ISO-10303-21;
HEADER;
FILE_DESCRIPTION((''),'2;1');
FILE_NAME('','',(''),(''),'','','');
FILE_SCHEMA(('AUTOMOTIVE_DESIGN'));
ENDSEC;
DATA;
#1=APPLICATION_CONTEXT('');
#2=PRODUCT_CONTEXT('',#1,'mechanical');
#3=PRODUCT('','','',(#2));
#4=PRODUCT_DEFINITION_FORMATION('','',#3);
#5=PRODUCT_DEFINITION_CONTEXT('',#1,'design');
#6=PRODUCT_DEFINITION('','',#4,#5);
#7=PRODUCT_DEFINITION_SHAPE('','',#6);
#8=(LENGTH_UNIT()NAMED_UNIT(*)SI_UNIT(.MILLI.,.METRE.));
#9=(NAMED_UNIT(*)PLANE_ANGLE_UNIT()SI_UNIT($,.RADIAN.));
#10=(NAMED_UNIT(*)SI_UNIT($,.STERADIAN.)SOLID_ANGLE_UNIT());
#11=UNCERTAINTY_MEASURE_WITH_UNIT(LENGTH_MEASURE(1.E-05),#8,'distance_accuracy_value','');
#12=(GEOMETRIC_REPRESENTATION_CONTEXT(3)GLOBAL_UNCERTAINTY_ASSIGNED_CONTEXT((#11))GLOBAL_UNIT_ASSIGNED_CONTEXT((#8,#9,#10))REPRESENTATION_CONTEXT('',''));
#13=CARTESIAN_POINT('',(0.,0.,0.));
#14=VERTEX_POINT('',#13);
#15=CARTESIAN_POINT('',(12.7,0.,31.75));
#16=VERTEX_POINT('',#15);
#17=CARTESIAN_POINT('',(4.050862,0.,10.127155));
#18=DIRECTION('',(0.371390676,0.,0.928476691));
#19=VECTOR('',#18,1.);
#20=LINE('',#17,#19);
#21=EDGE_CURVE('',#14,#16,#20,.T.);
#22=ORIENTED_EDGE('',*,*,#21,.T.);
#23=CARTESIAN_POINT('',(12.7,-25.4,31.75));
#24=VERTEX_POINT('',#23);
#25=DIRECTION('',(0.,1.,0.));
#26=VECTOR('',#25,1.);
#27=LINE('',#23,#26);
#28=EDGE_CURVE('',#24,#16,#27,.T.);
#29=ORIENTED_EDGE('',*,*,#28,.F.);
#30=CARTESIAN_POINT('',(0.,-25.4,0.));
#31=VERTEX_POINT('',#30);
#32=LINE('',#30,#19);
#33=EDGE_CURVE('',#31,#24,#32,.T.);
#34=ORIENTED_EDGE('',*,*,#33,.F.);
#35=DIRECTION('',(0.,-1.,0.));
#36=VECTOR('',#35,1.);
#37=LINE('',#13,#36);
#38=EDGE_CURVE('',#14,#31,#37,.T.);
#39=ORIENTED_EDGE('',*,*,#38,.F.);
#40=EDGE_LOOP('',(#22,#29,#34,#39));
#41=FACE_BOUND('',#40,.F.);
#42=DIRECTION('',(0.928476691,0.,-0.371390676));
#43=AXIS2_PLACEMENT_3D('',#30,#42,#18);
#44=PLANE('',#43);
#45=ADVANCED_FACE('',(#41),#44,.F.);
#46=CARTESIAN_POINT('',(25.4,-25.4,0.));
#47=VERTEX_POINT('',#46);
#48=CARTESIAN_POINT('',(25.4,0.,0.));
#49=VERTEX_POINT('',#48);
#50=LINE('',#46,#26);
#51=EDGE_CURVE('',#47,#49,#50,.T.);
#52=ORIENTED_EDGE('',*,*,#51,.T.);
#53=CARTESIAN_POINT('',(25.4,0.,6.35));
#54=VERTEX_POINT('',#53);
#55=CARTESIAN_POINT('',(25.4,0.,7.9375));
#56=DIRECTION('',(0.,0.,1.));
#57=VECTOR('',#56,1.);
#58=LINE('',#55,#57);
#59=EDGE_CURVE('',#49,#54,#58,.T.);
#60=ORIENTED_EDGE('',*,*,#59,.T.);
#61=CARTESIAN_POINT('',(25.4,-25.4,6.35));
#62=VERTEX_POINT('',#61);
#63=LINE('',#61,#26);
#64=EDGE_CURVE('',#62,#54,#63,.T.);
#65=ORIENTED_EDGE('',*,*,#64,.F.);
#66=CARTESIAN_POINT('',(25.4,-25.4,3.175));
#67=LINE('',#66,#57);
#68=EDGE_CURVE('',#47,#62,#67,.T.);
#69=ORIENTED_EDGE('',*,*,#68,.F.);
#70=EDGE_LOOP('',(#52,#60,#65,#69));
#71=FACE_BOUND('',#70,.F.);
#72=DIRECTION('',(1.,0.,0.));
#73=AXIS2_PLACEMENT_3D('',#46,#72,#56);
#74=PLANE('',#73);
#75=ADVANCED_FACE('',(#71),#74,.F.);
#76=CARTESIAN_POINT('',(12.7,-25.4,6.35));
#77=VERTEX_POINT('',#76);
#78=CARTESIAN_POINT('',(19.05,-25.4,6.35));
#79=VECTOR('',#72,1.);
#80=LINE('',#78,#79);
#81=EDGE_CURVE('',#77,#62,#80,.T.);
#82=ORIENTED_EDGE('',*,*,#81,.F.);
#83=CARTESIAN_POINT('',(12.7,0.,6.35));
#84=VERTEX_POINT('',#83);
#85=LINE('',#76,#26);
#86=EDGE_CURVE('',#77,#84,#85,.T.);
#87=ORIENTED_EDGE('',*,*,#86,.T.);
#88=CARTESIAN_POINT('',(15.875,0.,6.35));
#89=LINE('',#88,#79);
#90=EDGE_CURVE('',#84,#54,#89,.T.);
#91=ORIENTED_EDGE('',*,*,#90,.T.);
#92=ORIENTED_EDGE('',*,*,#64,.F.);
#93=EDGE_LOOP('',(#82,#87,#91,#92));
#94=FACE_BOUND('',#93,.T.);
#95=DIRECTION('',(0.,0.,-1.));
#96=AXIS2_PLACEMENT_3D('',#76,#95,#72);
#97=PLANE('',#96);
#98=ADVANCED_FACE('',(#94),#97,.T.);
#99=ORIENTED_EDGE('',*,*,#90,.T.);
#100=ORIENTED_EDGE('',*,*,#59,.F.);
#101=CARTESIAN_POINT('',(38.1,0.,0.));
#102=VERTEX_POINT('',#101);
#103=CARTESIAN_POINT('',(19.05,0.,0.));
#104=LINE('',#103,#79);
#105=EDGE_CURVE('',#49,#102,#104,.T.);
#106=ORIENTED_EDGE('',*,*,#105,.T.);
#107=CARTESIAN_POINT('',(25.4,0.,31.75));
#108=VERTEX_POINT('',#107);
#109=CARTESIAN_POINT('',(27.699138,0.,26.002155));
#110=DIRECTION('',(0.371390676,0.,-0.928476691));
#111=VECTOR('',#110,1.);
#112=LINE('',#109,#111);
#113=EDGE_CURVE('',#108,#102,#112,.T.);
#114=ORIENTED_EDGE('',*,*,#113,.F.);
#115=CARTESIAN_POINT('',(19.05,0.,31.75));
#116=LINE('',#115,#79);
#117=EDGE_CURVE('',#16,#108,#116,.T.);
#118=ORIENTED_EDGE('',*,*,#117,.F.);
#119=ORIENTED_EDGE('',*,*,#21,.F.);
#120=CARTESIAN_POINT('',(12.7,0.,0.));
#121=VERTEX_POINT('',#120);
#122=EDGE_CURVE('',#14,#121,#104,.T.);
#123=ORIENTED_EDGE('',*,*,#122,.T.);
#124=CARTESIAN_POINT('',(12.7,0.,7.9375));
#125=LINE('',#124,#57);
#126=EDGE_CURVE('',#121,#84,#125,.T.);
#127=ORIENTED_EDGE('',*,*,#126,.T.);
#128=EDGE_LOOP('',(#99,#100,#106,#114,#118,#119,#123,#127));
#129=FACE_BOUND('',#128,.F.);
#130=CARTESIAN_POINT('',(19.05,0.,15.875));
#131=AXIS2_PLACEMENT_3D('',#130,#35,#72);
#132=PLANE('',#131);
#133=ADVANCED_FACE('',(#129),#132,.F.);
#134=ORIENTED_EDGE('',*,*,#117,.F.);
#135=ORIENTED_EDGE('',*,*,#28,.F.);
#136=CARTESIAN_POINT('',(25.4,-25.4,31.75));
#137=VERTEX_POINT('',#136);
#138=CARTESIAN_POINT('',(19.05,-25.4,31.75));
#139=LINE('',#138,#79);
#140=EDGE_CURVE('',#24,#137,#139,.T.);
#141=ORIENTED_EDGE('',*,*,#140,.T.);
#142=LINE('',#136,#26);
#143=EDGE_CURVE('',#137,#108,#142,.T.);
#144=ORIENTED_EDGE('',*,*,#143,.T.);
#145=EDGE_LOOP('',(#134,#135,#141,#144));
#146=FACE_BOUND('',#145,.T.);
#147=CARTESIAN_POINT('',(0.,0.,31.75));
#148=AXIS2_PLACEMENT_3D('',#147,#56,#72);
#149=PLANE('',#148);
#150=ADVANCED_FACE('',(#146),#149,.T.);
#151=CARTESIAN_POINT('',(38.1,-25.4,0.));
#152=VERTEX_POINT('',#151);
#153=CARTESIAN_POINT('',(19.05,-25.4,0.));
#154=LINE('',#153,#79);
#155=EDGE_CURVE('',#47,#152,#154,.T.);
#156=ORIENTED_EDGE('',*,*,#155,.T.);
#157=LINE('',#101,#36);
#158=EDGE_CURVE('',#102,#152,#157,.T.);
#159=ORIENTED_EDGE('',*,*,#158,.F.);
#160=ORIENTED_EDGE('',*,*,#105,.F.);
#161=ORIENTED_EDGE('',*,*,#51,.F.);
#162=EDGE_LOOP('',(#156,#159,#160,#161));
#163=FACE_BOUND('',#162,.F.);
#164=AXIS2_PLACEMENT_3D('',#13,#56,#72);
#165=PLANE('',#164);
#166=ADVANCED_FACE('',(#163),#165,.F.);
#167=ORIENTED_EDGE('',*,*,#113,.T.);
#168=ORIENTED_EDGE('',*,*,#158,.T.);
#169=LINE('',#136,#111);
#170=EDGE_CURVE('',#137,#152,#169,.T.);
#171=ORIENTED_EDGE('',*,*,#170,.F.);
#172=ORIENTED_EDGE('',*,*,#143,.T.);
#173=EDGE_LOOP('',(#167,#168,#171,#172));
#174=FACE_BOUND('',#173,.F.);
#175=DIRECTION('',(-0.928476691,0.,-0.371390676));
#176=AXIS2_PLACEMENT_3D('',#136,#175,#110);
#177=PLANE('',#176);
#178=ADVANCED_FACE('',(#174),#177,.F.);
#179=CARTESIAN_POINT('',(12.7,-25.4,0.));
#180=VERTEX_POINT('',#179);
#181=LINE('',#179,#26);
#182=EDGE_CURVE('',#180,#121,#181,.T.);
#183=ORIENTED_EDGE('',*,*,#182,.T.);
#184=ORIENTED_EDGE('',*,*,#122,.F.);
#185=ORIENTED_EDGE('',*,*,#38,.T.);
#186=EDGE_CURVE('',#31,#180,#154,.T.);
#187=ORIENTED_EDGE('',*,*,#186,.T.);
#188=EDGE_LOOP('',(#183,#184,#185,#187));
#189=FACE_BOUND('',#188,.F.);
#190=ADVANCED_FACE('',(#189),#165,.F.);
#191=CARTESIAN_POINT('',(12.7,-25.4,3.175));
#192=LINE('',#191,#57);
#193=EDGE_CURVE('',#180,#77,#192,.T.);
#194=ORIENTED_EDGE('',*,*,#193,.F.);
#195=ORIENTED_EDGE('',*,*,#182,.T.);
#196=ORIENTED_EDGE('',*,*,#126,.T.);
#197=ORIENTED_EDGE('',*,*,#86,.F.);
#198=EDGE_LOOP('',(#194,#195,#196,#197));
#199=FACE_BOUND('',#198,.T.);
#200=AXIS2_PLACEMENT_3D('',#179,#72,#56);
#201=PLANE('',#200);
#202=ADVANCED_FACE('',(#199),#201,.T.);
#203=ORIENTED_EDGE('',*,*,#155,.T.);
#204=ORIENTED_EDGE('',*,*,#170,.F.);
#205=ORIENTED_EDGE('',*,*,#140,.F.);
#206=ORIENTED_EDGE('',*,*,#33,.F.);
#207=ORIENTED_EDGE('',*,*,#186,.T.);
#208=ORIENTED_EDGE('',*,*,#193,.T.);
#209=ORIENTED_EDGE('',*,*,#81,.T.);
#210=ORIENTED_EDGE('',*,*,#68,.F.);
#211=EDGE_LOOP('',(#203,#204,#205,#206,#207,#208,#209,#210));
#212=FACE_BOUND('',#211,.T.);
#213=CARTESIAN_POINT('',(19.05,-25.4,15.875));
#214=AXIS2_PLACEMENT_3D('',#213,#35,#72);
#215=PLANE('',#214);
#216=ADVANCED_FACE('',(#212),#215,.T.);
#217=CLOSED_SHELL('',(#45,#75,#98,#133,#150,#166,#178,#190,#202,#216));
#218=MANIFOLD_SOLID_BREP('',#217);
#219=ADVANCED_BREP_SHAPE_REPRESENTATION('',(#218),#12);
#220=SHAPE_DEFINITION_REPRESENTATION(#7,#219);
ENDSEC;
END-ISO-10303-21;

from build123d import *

# Parameters (mm, degrees)
F0_W     = 38.1
F0_H     = 31.75
F1_DEPTH = 25.4
F3_DEPTH = 25.4
F4_DEPTH = 25.4
F5_W     = 12.7
F5_H     = 6.35
F6_DEPTH = 25.401


# Not quite as in the source:
# - a feature names something its author has since deleted; it is built from what else it names


with BuildPart() as f1:
    # F0 (on Front) → F1 (new body)
    with BuildSketch(Plane.XZ):
        with Locations((19.05, 15.875)):
            Rectangle(F0_W, F0_H)
    extrude(amount=F1_DEPTH)

    # F0 (on Front) → F3 (join)
    with BuildSketch(Plane.XZ):
        with Locations((19.05, 15.875)):
            Rectangle(F0_W, F0_H)
    extrude(amount=F3_DEPTH)

    # F0 (on Front) → F4 (join)
    with BuildSketch(Plane.XZ):
        with Locations((19.05, 15.875)):
            Rectangle(F0_W, F0_H)
    extrude(amount=F4_DEPTH)

    # F5 (on face) → F6 (cut, through all)
    with BuildSketch(Plane.XZ.offset(25.4)):
        Polygon((0, 31.75), (0, 0), (12.7, 31.75), align=None)
        Polygon((38.1, 31.75), (25.4, 31.75), (38.1, 0), align=None)
        with Locations((19.05, 3.175)):
            Rectangle(F5_W, F5_H)
    extrude(amount=-F6_DEPTH, mode=Mode.SUBTRACT)


solid = f1.part
